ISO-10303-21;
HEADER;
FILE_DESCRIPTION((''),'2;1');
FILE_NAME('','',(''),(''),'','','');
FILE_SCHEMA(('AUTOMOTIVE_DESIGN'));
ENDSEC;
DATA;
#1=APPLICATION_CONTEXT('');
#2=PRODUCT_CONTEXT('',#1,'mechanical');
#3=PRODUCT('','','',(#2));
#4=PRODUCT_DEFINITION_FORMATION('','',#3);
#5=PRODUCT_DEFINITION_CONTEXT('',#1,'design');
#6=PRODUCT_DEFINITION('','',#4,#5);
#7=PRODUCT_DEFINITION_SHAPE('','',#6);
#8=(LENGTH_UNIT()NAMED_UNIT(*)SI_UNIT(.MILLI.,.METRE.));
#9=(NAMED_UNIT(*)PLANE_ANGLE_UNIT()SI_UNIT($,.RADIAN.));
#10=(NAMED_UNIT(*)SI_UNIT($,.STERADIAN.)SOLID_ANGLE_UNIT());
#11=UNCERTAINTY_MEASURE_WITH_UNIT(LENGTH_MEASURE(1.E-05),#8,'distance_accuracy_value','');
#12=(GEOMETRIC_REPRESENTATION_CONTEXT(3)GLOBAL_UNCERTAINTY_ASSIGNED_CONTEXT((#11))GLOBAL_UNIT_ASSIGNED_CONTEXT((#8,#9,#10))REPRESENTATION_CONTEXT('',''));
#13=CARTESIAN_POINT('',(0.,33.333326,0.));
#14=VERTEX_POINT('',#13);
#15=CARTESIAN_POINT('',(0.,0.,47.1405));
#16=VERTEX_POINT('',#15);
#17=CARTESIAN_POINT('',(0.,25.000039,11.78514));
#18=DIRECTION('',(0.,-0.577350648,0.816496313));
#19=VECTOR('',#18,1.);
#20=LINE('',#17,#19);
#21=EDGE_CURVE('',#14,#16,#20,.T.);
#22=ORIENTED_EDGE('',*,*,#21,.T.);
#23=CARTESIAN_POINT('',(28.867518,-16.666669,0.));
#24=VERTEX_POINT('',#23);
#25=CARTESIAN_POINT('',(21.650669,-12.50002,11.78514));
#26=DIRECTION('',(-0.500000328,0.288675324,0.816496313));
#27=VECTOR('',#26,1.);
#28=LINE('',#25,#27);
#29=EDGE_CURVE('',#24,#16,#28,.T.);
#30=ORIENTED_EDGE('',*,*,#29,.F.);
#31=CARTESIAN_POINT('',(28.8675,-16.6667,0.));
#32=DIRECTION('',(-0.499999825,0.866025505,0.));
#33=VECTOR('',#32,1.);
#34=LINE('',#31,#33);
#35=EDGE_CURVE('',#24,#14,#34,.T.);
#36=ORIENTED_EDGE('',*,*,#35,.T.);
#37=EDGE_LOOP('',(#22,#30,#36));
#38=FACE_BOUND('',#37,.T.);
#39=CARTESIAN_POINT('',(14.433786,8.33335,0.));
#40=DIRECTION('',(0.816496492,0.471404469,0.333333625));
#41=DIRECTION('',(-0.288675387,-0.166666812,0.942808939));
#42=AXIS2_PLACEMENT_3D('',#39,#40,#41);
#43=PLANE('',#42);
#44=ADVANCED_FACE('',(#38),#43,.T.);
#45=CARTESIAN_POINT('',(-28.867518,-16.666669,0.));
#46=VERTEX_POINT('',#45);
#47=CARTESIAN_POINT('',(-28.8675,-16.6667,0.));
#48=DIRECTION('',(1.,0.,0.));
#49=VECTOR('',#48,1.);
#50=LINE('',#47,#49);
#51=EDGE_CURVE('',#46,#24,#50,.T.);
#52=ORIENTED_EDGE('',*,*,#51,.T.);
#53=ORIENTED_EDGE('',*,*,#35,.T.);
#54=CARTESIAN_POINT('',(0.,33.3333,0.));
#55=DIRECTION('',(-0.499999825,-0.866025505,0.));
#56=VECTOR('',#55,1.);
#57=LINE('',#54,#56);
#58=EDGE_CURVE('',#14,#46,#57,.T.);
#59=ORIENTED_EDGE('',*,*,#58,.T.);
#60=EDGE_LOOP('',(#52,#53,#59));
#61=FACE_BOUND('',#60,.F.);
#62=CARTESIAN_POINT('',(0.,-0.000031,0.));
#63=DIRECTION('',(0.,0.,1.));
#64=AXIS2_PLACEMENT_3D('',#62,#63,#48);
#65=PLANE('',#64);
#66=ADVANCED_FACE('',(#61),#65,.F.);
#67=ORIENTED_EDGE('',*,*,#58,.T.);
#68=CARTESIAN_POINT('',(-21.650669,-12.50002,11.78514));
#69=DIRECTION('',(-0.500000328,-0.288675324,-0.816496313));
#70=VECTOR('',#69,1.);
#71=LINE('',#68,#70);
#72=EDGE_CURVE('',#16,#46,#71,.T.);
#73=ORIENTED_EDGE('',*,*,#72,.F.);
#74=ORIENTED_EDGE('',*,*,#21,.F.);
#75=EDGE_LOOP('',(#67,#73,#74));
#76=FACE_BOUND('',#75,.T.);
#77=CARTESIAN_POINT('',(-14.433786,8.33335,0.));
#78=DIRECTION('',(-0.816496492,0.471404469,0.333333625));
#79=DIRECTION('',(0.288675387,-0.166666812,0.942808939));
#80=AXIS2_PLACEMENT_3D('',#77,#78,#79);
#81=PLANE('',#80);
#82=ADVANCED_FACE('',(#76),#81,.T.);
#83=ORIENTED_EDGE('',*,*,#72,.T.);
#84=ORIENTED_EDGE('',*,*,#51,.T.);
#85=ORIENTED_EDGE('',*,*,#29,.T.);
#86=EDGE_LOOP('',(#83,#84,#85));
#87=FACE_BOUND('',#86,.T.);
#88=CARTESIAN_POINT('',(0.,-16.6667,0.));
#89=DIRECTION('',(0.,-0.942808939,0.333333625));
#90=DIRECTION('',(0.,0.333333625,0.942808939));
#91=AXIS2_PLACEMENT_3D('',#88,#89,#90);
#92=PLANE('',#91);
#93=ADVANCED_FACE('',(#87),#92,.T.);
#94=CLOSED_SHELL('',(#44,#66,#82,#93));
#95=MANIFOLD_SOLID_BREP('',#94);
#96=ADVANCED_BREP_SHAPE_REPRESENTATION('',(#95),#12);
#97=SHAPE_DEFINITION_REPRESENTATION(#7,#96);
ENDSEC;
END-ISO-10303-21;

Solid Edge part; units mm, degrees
sketch "Sketch1" plane through (0, 0, 0) normal (0, 0, 1) x (1, 0, 0)
  line L0 (-28.8675, -16.6667) -> (28.8675, -16.6667)
  line L1 (28.8675, -16.6667) -> (0, 33.3333)
  line L2 (0, 33.3333) -> (-28.8675, -16.6667)
extrude "Protrusion1" add sketch "Sketch1" along normal blind 113.4955
sketch "Sketch2" plane through (0, 0, 0) normal (1, 0, 0) x (0, 1, 0)
  line L0 (-16.6667, 0) -> (0, 47.1405)
extrude "Cutout1" cut sketch "Sketch2" along normal up to next and the other way up to next material side at (0, -8.3805, 23.5869)
pattern_circular "Pattern1" count 3 over 360 about axis through (0, 0, 0) along (0, 0, 1) of "Cutout1"
